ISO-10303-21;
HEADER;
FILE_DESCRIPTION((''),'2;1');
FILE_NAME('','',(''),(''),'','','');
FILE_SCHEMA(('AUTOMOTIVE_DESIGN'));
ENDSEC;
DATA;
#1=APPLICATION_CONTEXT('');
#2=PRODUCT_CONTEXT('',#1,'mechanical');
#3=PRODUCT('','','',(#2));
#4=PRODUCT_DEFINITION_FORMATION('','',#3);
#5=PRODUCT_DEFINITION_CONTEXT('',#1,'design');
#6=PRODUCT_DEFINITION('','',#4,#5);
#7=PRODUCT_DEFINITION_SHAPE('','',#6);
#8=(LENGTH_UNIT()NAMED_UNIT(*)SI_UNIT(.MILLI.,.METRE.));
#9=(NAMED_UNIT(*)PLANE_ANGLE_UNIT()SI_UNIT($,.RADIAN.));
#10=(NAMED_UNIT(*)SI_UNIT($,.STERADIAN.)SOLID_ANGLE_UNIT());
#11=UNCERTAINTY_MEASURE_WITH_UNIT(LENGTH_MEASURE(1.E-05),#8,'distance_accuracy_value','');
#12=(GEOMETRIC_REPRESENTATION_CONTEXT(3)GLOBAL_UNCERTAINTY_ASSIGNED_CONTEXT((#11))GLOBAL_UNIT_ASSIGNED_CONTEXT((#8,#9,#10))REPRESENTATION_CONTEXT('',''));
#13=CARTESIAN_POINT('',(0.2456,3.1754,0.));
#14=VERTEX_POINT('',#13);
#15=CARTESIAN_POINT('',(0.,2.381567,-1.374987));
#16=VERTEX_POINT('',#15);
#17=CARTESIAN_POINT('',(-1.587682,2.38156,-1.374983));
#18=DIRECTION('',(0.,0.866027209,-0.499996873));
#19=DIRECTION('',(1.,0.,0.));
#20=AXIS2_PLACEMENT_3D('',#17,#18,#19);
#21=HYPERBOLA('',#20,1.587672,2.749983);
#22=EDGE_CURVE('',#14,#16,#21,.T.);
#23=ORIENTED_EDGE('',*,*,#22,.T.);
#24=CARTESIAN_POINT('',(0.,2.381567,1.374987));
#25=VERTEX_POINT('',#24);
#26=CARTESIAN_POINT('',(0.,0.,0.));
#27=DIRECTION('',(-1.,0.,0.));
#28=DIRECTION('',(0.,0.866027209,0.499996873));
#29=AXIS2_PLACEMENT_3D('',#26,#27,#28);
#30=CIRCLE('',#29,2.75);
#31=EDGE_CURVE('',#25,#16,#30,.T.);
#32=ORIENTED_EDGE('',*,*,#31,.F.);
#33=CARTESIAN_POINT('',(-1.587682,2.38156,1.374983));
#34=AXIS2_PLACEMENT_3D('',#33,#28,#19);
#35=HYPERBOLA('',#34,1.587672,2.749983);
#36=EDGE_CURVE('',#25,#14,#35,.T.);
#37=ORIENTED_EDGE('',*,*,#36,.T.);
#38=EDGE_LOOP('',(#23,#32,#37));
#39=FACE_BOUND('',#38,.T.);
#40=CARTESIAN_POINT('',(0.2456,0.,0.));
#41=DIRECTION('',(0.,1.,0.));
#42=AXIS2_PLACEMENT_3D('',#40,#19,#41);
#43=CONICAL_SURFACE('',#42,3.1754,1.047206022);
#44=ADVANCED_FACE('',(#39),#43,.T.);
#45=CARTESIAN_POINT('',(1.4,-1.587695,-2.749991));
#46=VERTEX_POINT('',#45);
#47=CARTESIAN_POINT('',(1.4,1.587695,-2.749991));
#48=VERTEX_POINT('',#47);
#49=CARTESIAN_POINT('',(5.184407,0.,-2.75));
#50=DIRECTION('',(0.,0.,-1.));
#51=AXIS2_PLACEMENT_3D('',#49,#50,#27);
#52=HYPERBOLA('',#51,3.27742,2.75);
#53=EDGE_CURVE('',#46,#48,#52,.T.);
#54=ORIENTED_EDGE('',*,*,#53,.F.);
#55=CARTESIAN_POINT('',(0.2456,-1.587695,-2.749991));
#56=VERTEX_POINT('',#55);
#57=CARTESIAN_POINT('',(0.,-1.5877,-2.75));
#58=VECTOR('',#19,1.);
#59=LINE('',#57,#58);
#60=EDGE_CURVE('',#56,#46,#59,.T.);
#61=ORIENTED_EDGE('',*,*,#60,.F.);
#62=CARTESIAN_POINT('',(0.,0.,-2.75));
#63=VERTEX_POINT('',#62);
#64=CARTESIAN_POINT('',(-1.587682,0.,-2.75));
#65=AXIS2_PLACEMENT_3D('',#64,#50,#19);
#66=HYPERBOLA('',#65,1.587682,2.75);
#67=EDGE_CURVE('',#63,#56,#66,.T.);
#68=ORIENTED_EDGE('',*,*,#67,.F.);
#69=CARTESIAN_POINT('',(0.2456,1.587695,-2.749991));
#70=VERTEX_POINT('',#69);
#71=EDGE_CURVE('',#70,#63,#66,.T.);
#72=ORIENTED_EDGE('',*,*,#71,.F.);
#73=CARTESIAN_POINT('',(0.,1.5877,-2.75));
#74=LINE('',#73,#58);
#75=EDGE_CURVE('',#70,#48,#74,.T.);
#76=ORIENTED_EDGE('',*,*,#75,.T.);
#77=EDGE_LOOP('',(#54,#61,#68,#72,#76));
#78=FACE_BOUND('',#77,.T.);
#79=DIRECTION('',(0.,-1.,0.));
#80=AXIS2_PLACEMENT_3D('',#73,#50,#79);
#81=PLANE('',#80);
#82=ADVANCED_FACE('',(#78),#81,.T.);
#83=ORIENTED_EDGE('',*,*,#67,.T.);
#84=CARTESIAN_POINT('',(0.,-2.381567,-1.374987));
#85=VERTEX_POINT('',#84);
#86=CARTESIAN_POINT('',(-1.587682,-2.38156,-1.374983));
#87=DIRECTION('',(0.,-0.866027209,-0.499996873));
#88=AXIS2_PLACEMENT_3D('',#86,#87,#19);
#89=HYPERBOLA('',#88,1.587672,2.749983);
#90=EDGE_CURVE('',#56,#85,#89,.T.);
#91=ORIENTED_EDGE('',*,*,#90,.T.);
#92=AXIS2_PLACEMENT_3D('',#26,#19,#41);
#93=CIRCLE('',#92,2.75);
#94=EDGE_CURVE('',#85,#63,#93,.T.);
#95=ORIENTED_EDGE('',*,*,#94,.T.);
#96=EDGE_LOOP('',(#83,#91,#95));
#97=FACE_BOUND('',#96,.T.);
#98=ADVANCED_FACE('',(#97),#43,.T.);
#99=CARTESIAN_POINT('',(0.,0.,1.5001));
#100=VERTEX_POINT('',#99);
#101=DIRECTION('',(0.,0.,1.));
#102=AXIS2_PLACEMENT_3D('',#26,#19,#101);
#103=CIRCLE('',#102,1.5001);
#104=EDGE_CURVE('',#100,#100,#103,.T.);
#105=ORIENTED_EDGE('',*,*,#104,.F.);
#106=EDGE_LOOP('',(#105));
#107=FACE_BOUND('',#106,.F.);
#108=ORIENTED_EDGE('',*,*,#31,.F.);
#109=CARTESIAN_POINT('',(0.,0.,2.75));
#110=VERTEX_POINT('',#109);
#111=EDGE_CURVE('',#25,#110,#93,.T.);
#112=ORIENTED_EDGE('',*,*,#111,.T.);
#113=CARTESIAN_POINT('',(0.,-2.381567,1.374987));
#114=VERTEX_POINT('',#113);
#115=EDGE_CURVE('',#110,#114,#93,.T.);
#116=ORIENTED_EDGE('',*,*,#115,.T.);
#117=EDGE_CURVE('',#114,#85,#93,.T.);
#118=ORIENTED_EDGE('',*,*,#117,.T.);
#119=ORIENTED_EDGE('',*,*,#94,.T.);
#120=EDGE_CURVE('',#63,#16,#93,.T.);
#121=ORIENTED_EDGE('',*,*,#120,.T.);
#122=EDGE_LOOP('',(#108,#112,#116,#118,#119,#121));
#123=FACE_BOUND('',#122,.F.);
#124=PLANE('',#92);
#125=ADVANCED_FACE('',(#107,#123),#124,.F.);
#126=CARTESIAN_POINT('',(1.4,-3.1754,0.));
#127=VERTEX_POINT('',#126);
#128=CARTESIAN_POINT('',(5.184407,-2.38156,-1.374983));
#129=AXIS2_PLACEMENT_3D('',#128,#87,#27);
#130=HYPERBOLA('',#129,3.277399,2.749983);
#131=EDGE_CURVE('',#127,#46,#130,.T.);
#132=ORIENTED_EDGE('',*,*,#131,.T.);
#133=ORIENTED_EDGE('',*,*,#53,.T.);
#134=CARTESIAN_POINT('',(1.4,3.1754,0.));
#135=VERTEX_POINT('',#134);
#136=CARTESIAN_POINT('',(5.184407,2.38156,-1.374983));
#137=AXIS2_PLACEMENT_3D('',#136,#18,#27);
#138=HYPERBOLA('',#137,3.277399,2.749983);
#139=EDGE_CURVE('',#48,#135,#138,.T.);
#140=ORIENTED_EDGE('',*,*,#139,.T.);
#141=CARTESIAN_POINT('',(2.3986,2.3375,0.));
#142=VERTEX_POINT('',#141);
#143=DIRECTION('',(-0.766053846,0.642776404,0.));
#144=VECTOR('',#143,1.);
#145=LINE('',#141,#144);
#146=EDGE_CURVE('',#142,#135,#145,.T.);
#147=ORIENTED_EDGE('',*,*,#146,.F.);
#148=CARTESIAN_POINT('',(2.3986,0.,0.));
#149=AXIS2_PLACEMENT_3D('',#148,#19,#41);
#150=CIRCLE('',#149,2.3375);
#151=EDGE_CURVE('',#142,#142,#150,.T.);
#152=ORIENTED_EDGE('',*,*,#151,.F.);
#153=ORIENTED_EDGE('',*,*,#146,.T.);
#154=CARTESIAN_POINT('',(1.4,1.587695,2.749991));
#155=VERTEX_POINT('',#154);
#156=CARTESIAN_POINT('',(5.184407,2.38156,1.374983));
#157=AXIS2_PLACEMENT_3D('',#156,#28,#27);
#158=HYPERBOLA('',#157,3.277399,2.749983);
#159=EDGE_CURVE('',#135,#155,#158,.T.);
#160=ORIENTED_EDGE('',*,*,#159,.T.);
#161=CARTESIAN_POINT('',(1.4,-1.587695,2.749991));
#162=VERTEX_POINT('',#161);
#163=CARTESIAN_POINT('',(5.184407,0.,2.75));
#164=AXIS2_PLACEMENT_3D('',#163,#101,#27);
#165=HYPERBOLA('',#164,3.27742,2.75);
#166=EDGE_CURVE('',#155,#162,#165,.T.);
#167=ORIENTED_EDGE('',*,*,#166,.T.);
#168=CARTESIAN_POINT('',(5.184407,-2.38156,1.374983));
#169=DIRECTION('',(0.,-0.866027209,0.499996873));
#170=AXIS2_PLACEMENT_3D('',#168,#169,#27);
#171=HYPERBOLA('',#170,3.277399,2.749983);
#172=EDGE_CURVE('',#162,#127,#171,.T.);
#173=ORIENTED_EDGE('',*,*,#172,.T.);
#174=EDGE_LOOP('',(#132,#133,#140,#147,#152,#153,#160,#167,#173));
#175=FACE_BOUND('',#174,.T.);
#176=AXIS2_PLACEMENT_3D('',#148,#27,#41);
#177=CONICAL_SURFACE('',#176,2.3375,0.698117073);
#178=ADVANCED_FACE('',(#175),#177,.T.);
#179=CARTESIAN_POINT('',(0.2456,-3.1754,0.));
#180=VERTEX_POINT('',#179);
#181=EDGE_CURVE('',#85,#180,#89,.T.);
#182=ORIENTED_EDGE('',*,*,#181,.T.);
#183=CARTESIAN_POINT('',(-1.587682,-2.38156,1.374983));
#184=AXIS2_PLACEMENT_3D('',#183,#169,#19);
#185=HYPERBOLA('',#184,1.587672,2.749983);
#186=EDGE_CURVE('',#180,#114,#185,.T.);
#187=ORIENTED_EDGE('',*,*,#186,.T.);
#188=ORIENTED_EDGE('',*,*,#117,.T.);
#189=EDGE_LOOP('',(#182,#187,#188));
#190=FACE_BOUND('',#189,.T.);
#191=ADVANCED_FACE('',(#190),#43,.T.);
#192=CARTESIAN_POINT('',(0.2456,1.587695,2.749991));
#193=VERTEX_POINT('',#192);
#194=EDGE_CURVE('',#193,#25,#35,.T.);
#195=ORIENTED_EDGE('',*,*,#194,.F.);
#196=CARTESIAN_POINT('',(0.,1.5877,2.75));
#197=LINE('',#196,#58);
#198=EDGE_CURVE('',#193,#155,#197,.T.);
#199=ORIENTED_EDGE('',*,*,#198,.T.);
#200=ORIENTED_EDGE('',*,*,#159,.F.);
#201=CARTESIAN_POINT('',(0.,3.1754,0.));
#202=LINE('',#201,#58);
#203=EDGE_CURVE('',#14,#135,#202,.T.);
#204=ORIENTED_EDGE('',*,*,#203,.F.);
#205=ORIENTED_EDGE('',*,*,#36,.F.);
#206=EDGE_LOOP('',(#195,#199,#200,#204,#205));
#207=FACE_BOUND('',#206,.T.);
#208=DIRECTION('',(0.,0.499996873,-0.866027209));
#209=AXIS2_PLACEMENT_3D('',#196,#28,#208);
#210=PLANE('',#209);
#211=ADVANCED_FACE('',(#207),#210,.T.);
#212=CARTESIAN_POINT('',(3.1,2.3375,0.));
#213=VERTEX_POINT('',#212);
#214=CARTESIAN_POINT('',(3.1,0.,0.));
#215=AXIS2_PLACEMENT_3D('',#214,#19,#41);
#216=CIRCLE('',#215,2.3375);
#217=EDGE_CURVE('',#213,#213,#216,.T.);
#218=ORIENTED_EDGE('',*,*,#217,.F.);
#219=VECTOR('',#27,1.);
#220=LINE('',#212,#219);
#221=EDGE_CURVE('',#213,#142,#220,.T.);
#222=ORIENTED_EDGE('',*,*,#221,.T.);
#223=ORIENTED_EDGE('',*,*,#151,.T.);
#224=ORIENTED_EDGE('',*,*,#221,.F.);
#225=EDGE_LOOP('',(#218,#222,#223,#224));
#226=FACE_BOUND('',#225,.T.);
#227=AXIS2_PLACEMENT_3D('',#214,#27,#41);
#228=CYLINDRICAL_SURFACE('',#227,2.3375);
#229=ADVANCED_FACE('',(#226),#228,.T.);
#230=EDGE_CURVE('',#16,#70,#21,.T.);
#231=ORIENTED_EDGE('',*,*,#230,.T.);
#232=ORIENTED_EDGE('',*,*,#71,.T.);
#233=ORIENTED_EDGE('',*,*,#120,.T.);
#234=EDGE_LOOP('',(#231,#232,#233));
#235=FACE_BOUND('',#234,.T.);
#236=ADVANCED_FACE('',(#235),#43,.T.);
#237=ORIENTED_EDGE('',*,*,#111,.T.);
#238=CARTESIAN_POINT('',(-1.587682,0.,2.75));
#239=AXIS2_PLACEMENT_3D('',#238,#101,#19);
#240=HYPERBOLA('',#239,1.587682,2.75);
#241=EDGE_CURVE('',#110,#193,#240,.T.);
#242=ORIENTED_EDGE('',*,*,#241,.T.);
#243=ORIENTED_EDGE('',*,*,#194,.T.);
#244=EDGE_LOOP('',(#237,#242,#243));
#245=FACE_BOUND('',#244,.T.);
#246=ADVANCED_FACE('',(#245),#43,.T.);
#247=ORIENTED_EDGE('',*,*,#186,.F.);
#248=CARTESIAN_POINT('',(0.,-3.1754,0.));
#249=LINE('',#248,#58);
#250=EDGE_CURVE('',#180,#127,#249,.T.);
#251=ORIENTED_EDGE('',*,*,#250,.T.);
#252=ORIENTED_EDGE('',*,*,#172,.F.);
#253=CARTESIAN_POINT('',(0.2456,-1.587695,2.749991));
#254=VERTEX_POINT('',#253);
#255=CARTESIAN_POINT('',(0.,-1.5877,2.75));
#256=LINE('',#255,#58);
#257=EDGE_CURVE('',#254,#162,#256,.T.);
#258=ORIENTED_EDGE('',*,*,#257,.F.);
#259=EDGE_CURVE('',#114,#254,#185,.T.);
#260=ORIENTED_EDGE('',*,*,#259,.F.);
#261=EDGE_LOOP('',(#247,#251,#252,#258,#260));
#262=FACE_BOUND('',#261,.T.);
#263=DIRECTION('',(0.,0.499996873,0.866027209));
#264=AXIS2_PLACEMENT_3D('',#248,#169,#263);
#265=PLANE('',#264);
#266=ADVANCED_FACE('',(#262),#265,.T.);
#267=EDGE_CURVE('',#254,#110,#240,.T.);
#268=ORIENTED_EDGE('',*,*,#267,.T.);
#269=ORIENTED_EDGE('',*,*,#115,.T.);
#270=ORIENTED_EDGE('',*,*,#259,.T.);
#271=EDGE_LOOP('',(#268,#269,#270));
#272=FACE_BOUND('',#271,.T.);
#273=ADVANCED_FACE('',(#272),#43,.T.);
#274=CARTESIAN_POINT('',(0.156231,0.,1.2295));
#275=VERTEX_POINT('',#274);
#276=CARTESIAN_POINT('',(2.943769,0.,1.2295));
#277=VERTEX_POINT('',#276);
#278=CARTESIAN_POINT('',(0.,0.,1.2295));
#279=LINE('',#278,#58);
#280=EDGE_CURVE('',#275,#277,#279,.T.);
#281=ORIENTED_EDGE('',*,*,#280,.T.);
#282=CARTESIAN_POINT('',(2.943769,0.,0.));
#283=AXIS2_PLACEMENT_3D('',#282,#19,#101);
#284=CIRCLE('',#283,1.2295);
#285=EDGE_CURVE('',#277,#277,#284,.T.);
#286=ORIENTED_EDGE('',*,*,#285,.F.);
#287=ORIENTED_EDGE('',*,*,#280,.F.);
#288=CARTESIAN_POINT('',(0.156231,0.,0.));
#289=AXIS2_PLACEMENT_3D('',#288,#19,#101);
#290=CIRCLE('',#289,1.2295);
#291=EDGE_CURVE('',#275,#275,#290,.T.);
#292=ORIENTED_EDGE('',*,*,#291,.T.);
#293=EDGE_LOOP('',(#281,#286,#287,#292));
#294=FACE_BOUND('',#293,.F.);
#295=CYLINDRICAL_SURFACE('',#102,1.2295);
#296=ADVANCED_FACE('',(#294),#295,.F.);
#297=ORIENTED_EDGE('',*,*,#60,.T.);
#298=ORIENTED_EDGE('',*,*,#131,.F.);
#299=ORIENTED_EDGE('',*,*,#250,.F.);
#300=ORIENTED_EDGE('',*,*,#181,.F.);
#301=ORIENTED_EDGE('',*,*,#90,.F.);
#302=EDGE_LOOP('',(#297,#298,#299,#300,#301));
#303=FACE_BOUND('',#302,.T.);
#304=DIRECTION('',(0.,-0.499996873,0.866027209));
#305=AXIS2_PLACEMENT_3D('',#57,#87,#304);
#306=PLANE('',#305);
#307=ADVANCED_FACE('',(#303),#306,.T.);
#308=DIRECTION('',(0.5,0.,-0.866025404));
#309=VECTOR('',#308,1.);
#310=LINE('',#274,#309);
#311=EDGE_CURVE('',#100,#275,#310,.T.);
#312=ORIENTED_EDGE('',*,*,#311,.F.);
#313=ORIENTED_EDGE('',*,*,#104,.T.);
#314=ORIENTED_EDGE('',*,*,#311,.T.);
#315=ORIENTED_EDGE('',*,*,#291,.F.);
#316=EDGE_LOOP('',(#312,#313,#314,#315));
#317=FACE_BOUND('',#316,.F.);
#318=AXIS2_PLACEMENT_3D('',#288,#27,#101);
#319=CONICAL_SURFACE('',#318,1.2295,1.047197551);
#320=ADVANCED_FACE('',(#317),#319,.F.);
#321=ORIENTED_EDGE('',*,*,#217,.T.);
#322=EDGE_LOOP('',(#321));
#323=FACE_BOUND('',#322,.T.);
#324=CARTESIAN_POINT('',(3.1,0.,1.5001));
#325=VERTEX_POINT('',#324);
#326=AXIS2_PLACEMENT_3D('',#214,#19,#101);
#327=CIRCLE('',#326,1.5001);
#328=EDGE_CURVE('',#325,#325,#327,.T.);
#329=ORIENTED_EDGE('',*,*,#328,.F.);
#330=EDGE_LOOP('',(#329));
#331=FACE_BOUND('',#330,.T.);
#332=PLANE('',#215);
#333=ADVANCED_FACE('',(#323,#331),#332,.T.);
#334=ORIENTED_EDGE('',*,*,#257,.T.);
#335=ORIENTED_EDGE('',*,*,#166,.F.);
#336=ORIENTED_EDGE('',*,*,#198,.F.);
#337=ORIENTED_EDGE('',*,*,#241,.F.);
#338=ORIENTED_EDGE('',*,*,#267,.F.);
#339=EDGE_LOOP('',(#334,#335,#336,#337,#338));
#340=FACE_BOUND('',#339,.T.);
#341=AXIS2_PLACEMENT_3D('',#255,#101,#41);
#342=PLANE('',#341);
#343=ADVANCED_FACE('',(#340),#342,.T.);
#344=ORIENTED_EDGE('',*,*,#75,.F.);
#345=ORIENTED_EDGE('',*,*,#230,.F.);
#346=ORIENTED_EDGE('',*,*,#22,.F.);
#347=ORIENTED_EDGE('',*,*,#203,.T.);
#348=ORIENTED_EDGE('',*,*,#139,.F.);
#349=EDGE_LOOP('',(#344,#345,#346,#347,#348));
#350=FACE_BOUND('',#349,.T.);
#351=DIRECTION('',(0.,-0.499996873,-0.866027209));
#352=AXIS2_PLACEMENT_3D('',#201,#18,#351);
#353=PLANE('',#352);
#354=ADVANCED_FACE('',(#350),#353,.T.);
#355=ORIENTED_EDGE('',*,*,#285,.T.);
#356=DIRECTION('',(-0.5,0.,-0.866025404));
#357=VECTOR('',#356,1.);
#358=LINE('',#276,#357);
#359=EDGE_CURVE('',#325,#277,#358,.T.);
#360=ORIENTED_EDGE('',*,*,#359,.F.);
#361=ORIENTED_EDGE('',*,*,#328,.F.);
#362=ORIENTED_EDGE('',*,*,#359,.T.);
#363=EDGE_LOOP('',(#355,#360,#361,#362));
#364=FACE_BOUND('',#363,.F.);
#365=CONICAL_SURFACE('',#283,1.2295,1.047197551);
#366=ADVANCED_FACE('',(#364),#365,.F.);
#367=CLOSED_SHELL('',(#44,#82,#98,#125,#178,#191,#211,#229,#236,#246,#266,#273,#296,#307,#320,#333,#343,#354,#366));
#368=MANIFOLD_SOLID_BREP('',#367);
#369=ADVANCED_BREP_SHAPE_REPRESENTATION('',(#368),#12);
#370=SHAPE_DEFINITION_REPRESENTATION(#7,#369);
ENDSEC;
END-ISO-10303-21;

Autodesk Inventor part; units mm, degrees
ref_plane "YZ Plane" through (0, 0, 0) normal (1, 0, 0) x (0, 1, 0)
ref_plane "XZ Plane" through (0, 0, 0) normal (0, 1, 0) x (-1, 0, 0)
sketch "Esquisse1" plane through (0, 0, 0) normal (1, 0, 0) x (0, 1, 0)
  line L0 (-3.1754, 0) -> (-1.5877, 2.75)
  line L1 (-1.5877, 2.75) -> (1.5877, 2.75)
  line L2 (1.5877, 2.75) -> (3.1754, 0)
  line L3 (3.1754, 0) -> (1.5877, -2.75)
  line L4 (1.5877, -2.75) -> (-1.5877, -2.75)
  line L5 (-1.5877, -2.75) -> (-3.1754, 0)
  point P0 (0, 0)
  point P1 (0, 0)
  dimension "d0" = 6.3509
extrude "Corps" add sketch "Esquisse1" along normal blind 3.1
sketch "Esquisse2" plane through (0, 0, 0) normal (-1, 0, 0) x (0, 0, 1)
  line L0 (0, -4.4456) -> (0, 4.4456) projected
  line L1 (-3.85, 0) -> (3.85, 0) projected
  point P0 (0, 0)
hole "Filetage" at (0, 0, 0) direction (1, 0, 0) diameter 2.459 end through all thread size "M3x0.5" class "6H" standard "ANSI Metric M Profile"
chamfer "Chanfrein1" distance 0.2706 angle 30 1 edges at (0, 0, -1.2295) measured on face at (0, -1.925, -1.1495)
chamfer "Chanfrein2" distance 0.2706 angle 30 1 edges at (3.1, 0, -1.2295) measured on face at (3.1, -1.925, -1.1495)
sketch "Esquisse3" plane through (0, 0, 0) normal (0, 0, 1) x (1, 0, 0)
  line L0 (0, 1.5877) -> (0, 3.1754) projected
  line L1 (0, 3.1754) -> (3.1, 3.1754) projected
  line L2 (3.1, 1.5877) -> (3.1, 3.1754) projected
  line L3 (-0.62, 0) -> (3.72, 0) projected
  line L4 (0.2456, 3.1754) -> (0, 2.75)
  line L5 (3.1, 2.3375) -> (2.3986, 2.3375)
  line L6 (2.3986, 2.3375) -> (1.4, 3.1754)
  dimension "d3" = 30
  dimension "d5" = 5.5
  dimension "d6" = 4.675
  dimension "d8" = 50
  dimension "d9" = 1.4
revolve "Chanfrein3" cut sketch "Esquisse3" angle 360 about axis through (-10, 0, 0) along (1, 0, 0)
ref_plane "Work Plane1" through (8.9551, 0, 0) normal (0, 0, 1) x (-1, 0, 0)
equation "\"d0\" = 1.1547 * SW"
equation "\"d1\" = KOH"
equation "\"d10\" = -0.5 * GD1 + 0.5 * NND"
equation "\"d39\" = -0.5 * GD1 + 0.5 * NND"
equation "\"d12\" = -0.5 * GD1 + 0.5 * NND"
equation "\"d40\" = -0.5 * GD1 + 0.5 * NND"
equation "\"d3\" = ANG1"
equation "\"d5\" = SW0"
equation "\"d6\" = SW1"
equation "\"d8\" = ANG2"
equation "\"d9\" = KOH1"
equation "\"ANG1\" = 30deg"
equation "\"ANG2\" = 50deg"
equation "\"NND\" = 3"
equation "\"KOH\" = 3.1"
equation "\"SW\" = 5.5"
equation "\"SW0\" = SW"
equation "\"SW1\" = 0.85 * SW"
equation "\"KOH1\" = 1.4"
equation "\"GUL\" = 0.541266 * PTC"
equation "\"THREADDIA\" = 3"
equation "\"TOA\" = 30deg"
equation "\"PTC\" = 0.5"
equation "\"E0\" = 1.155 * SW"
equation "\"GAL\" = 0.541266 * PTC"
equation "\"GD1\" = 2.458734"
properties part number "ANSI B18.16.3M - Property Class 5 and 10 - Metric M3 x 0.5 Type de métal" material "Acier, doux"
